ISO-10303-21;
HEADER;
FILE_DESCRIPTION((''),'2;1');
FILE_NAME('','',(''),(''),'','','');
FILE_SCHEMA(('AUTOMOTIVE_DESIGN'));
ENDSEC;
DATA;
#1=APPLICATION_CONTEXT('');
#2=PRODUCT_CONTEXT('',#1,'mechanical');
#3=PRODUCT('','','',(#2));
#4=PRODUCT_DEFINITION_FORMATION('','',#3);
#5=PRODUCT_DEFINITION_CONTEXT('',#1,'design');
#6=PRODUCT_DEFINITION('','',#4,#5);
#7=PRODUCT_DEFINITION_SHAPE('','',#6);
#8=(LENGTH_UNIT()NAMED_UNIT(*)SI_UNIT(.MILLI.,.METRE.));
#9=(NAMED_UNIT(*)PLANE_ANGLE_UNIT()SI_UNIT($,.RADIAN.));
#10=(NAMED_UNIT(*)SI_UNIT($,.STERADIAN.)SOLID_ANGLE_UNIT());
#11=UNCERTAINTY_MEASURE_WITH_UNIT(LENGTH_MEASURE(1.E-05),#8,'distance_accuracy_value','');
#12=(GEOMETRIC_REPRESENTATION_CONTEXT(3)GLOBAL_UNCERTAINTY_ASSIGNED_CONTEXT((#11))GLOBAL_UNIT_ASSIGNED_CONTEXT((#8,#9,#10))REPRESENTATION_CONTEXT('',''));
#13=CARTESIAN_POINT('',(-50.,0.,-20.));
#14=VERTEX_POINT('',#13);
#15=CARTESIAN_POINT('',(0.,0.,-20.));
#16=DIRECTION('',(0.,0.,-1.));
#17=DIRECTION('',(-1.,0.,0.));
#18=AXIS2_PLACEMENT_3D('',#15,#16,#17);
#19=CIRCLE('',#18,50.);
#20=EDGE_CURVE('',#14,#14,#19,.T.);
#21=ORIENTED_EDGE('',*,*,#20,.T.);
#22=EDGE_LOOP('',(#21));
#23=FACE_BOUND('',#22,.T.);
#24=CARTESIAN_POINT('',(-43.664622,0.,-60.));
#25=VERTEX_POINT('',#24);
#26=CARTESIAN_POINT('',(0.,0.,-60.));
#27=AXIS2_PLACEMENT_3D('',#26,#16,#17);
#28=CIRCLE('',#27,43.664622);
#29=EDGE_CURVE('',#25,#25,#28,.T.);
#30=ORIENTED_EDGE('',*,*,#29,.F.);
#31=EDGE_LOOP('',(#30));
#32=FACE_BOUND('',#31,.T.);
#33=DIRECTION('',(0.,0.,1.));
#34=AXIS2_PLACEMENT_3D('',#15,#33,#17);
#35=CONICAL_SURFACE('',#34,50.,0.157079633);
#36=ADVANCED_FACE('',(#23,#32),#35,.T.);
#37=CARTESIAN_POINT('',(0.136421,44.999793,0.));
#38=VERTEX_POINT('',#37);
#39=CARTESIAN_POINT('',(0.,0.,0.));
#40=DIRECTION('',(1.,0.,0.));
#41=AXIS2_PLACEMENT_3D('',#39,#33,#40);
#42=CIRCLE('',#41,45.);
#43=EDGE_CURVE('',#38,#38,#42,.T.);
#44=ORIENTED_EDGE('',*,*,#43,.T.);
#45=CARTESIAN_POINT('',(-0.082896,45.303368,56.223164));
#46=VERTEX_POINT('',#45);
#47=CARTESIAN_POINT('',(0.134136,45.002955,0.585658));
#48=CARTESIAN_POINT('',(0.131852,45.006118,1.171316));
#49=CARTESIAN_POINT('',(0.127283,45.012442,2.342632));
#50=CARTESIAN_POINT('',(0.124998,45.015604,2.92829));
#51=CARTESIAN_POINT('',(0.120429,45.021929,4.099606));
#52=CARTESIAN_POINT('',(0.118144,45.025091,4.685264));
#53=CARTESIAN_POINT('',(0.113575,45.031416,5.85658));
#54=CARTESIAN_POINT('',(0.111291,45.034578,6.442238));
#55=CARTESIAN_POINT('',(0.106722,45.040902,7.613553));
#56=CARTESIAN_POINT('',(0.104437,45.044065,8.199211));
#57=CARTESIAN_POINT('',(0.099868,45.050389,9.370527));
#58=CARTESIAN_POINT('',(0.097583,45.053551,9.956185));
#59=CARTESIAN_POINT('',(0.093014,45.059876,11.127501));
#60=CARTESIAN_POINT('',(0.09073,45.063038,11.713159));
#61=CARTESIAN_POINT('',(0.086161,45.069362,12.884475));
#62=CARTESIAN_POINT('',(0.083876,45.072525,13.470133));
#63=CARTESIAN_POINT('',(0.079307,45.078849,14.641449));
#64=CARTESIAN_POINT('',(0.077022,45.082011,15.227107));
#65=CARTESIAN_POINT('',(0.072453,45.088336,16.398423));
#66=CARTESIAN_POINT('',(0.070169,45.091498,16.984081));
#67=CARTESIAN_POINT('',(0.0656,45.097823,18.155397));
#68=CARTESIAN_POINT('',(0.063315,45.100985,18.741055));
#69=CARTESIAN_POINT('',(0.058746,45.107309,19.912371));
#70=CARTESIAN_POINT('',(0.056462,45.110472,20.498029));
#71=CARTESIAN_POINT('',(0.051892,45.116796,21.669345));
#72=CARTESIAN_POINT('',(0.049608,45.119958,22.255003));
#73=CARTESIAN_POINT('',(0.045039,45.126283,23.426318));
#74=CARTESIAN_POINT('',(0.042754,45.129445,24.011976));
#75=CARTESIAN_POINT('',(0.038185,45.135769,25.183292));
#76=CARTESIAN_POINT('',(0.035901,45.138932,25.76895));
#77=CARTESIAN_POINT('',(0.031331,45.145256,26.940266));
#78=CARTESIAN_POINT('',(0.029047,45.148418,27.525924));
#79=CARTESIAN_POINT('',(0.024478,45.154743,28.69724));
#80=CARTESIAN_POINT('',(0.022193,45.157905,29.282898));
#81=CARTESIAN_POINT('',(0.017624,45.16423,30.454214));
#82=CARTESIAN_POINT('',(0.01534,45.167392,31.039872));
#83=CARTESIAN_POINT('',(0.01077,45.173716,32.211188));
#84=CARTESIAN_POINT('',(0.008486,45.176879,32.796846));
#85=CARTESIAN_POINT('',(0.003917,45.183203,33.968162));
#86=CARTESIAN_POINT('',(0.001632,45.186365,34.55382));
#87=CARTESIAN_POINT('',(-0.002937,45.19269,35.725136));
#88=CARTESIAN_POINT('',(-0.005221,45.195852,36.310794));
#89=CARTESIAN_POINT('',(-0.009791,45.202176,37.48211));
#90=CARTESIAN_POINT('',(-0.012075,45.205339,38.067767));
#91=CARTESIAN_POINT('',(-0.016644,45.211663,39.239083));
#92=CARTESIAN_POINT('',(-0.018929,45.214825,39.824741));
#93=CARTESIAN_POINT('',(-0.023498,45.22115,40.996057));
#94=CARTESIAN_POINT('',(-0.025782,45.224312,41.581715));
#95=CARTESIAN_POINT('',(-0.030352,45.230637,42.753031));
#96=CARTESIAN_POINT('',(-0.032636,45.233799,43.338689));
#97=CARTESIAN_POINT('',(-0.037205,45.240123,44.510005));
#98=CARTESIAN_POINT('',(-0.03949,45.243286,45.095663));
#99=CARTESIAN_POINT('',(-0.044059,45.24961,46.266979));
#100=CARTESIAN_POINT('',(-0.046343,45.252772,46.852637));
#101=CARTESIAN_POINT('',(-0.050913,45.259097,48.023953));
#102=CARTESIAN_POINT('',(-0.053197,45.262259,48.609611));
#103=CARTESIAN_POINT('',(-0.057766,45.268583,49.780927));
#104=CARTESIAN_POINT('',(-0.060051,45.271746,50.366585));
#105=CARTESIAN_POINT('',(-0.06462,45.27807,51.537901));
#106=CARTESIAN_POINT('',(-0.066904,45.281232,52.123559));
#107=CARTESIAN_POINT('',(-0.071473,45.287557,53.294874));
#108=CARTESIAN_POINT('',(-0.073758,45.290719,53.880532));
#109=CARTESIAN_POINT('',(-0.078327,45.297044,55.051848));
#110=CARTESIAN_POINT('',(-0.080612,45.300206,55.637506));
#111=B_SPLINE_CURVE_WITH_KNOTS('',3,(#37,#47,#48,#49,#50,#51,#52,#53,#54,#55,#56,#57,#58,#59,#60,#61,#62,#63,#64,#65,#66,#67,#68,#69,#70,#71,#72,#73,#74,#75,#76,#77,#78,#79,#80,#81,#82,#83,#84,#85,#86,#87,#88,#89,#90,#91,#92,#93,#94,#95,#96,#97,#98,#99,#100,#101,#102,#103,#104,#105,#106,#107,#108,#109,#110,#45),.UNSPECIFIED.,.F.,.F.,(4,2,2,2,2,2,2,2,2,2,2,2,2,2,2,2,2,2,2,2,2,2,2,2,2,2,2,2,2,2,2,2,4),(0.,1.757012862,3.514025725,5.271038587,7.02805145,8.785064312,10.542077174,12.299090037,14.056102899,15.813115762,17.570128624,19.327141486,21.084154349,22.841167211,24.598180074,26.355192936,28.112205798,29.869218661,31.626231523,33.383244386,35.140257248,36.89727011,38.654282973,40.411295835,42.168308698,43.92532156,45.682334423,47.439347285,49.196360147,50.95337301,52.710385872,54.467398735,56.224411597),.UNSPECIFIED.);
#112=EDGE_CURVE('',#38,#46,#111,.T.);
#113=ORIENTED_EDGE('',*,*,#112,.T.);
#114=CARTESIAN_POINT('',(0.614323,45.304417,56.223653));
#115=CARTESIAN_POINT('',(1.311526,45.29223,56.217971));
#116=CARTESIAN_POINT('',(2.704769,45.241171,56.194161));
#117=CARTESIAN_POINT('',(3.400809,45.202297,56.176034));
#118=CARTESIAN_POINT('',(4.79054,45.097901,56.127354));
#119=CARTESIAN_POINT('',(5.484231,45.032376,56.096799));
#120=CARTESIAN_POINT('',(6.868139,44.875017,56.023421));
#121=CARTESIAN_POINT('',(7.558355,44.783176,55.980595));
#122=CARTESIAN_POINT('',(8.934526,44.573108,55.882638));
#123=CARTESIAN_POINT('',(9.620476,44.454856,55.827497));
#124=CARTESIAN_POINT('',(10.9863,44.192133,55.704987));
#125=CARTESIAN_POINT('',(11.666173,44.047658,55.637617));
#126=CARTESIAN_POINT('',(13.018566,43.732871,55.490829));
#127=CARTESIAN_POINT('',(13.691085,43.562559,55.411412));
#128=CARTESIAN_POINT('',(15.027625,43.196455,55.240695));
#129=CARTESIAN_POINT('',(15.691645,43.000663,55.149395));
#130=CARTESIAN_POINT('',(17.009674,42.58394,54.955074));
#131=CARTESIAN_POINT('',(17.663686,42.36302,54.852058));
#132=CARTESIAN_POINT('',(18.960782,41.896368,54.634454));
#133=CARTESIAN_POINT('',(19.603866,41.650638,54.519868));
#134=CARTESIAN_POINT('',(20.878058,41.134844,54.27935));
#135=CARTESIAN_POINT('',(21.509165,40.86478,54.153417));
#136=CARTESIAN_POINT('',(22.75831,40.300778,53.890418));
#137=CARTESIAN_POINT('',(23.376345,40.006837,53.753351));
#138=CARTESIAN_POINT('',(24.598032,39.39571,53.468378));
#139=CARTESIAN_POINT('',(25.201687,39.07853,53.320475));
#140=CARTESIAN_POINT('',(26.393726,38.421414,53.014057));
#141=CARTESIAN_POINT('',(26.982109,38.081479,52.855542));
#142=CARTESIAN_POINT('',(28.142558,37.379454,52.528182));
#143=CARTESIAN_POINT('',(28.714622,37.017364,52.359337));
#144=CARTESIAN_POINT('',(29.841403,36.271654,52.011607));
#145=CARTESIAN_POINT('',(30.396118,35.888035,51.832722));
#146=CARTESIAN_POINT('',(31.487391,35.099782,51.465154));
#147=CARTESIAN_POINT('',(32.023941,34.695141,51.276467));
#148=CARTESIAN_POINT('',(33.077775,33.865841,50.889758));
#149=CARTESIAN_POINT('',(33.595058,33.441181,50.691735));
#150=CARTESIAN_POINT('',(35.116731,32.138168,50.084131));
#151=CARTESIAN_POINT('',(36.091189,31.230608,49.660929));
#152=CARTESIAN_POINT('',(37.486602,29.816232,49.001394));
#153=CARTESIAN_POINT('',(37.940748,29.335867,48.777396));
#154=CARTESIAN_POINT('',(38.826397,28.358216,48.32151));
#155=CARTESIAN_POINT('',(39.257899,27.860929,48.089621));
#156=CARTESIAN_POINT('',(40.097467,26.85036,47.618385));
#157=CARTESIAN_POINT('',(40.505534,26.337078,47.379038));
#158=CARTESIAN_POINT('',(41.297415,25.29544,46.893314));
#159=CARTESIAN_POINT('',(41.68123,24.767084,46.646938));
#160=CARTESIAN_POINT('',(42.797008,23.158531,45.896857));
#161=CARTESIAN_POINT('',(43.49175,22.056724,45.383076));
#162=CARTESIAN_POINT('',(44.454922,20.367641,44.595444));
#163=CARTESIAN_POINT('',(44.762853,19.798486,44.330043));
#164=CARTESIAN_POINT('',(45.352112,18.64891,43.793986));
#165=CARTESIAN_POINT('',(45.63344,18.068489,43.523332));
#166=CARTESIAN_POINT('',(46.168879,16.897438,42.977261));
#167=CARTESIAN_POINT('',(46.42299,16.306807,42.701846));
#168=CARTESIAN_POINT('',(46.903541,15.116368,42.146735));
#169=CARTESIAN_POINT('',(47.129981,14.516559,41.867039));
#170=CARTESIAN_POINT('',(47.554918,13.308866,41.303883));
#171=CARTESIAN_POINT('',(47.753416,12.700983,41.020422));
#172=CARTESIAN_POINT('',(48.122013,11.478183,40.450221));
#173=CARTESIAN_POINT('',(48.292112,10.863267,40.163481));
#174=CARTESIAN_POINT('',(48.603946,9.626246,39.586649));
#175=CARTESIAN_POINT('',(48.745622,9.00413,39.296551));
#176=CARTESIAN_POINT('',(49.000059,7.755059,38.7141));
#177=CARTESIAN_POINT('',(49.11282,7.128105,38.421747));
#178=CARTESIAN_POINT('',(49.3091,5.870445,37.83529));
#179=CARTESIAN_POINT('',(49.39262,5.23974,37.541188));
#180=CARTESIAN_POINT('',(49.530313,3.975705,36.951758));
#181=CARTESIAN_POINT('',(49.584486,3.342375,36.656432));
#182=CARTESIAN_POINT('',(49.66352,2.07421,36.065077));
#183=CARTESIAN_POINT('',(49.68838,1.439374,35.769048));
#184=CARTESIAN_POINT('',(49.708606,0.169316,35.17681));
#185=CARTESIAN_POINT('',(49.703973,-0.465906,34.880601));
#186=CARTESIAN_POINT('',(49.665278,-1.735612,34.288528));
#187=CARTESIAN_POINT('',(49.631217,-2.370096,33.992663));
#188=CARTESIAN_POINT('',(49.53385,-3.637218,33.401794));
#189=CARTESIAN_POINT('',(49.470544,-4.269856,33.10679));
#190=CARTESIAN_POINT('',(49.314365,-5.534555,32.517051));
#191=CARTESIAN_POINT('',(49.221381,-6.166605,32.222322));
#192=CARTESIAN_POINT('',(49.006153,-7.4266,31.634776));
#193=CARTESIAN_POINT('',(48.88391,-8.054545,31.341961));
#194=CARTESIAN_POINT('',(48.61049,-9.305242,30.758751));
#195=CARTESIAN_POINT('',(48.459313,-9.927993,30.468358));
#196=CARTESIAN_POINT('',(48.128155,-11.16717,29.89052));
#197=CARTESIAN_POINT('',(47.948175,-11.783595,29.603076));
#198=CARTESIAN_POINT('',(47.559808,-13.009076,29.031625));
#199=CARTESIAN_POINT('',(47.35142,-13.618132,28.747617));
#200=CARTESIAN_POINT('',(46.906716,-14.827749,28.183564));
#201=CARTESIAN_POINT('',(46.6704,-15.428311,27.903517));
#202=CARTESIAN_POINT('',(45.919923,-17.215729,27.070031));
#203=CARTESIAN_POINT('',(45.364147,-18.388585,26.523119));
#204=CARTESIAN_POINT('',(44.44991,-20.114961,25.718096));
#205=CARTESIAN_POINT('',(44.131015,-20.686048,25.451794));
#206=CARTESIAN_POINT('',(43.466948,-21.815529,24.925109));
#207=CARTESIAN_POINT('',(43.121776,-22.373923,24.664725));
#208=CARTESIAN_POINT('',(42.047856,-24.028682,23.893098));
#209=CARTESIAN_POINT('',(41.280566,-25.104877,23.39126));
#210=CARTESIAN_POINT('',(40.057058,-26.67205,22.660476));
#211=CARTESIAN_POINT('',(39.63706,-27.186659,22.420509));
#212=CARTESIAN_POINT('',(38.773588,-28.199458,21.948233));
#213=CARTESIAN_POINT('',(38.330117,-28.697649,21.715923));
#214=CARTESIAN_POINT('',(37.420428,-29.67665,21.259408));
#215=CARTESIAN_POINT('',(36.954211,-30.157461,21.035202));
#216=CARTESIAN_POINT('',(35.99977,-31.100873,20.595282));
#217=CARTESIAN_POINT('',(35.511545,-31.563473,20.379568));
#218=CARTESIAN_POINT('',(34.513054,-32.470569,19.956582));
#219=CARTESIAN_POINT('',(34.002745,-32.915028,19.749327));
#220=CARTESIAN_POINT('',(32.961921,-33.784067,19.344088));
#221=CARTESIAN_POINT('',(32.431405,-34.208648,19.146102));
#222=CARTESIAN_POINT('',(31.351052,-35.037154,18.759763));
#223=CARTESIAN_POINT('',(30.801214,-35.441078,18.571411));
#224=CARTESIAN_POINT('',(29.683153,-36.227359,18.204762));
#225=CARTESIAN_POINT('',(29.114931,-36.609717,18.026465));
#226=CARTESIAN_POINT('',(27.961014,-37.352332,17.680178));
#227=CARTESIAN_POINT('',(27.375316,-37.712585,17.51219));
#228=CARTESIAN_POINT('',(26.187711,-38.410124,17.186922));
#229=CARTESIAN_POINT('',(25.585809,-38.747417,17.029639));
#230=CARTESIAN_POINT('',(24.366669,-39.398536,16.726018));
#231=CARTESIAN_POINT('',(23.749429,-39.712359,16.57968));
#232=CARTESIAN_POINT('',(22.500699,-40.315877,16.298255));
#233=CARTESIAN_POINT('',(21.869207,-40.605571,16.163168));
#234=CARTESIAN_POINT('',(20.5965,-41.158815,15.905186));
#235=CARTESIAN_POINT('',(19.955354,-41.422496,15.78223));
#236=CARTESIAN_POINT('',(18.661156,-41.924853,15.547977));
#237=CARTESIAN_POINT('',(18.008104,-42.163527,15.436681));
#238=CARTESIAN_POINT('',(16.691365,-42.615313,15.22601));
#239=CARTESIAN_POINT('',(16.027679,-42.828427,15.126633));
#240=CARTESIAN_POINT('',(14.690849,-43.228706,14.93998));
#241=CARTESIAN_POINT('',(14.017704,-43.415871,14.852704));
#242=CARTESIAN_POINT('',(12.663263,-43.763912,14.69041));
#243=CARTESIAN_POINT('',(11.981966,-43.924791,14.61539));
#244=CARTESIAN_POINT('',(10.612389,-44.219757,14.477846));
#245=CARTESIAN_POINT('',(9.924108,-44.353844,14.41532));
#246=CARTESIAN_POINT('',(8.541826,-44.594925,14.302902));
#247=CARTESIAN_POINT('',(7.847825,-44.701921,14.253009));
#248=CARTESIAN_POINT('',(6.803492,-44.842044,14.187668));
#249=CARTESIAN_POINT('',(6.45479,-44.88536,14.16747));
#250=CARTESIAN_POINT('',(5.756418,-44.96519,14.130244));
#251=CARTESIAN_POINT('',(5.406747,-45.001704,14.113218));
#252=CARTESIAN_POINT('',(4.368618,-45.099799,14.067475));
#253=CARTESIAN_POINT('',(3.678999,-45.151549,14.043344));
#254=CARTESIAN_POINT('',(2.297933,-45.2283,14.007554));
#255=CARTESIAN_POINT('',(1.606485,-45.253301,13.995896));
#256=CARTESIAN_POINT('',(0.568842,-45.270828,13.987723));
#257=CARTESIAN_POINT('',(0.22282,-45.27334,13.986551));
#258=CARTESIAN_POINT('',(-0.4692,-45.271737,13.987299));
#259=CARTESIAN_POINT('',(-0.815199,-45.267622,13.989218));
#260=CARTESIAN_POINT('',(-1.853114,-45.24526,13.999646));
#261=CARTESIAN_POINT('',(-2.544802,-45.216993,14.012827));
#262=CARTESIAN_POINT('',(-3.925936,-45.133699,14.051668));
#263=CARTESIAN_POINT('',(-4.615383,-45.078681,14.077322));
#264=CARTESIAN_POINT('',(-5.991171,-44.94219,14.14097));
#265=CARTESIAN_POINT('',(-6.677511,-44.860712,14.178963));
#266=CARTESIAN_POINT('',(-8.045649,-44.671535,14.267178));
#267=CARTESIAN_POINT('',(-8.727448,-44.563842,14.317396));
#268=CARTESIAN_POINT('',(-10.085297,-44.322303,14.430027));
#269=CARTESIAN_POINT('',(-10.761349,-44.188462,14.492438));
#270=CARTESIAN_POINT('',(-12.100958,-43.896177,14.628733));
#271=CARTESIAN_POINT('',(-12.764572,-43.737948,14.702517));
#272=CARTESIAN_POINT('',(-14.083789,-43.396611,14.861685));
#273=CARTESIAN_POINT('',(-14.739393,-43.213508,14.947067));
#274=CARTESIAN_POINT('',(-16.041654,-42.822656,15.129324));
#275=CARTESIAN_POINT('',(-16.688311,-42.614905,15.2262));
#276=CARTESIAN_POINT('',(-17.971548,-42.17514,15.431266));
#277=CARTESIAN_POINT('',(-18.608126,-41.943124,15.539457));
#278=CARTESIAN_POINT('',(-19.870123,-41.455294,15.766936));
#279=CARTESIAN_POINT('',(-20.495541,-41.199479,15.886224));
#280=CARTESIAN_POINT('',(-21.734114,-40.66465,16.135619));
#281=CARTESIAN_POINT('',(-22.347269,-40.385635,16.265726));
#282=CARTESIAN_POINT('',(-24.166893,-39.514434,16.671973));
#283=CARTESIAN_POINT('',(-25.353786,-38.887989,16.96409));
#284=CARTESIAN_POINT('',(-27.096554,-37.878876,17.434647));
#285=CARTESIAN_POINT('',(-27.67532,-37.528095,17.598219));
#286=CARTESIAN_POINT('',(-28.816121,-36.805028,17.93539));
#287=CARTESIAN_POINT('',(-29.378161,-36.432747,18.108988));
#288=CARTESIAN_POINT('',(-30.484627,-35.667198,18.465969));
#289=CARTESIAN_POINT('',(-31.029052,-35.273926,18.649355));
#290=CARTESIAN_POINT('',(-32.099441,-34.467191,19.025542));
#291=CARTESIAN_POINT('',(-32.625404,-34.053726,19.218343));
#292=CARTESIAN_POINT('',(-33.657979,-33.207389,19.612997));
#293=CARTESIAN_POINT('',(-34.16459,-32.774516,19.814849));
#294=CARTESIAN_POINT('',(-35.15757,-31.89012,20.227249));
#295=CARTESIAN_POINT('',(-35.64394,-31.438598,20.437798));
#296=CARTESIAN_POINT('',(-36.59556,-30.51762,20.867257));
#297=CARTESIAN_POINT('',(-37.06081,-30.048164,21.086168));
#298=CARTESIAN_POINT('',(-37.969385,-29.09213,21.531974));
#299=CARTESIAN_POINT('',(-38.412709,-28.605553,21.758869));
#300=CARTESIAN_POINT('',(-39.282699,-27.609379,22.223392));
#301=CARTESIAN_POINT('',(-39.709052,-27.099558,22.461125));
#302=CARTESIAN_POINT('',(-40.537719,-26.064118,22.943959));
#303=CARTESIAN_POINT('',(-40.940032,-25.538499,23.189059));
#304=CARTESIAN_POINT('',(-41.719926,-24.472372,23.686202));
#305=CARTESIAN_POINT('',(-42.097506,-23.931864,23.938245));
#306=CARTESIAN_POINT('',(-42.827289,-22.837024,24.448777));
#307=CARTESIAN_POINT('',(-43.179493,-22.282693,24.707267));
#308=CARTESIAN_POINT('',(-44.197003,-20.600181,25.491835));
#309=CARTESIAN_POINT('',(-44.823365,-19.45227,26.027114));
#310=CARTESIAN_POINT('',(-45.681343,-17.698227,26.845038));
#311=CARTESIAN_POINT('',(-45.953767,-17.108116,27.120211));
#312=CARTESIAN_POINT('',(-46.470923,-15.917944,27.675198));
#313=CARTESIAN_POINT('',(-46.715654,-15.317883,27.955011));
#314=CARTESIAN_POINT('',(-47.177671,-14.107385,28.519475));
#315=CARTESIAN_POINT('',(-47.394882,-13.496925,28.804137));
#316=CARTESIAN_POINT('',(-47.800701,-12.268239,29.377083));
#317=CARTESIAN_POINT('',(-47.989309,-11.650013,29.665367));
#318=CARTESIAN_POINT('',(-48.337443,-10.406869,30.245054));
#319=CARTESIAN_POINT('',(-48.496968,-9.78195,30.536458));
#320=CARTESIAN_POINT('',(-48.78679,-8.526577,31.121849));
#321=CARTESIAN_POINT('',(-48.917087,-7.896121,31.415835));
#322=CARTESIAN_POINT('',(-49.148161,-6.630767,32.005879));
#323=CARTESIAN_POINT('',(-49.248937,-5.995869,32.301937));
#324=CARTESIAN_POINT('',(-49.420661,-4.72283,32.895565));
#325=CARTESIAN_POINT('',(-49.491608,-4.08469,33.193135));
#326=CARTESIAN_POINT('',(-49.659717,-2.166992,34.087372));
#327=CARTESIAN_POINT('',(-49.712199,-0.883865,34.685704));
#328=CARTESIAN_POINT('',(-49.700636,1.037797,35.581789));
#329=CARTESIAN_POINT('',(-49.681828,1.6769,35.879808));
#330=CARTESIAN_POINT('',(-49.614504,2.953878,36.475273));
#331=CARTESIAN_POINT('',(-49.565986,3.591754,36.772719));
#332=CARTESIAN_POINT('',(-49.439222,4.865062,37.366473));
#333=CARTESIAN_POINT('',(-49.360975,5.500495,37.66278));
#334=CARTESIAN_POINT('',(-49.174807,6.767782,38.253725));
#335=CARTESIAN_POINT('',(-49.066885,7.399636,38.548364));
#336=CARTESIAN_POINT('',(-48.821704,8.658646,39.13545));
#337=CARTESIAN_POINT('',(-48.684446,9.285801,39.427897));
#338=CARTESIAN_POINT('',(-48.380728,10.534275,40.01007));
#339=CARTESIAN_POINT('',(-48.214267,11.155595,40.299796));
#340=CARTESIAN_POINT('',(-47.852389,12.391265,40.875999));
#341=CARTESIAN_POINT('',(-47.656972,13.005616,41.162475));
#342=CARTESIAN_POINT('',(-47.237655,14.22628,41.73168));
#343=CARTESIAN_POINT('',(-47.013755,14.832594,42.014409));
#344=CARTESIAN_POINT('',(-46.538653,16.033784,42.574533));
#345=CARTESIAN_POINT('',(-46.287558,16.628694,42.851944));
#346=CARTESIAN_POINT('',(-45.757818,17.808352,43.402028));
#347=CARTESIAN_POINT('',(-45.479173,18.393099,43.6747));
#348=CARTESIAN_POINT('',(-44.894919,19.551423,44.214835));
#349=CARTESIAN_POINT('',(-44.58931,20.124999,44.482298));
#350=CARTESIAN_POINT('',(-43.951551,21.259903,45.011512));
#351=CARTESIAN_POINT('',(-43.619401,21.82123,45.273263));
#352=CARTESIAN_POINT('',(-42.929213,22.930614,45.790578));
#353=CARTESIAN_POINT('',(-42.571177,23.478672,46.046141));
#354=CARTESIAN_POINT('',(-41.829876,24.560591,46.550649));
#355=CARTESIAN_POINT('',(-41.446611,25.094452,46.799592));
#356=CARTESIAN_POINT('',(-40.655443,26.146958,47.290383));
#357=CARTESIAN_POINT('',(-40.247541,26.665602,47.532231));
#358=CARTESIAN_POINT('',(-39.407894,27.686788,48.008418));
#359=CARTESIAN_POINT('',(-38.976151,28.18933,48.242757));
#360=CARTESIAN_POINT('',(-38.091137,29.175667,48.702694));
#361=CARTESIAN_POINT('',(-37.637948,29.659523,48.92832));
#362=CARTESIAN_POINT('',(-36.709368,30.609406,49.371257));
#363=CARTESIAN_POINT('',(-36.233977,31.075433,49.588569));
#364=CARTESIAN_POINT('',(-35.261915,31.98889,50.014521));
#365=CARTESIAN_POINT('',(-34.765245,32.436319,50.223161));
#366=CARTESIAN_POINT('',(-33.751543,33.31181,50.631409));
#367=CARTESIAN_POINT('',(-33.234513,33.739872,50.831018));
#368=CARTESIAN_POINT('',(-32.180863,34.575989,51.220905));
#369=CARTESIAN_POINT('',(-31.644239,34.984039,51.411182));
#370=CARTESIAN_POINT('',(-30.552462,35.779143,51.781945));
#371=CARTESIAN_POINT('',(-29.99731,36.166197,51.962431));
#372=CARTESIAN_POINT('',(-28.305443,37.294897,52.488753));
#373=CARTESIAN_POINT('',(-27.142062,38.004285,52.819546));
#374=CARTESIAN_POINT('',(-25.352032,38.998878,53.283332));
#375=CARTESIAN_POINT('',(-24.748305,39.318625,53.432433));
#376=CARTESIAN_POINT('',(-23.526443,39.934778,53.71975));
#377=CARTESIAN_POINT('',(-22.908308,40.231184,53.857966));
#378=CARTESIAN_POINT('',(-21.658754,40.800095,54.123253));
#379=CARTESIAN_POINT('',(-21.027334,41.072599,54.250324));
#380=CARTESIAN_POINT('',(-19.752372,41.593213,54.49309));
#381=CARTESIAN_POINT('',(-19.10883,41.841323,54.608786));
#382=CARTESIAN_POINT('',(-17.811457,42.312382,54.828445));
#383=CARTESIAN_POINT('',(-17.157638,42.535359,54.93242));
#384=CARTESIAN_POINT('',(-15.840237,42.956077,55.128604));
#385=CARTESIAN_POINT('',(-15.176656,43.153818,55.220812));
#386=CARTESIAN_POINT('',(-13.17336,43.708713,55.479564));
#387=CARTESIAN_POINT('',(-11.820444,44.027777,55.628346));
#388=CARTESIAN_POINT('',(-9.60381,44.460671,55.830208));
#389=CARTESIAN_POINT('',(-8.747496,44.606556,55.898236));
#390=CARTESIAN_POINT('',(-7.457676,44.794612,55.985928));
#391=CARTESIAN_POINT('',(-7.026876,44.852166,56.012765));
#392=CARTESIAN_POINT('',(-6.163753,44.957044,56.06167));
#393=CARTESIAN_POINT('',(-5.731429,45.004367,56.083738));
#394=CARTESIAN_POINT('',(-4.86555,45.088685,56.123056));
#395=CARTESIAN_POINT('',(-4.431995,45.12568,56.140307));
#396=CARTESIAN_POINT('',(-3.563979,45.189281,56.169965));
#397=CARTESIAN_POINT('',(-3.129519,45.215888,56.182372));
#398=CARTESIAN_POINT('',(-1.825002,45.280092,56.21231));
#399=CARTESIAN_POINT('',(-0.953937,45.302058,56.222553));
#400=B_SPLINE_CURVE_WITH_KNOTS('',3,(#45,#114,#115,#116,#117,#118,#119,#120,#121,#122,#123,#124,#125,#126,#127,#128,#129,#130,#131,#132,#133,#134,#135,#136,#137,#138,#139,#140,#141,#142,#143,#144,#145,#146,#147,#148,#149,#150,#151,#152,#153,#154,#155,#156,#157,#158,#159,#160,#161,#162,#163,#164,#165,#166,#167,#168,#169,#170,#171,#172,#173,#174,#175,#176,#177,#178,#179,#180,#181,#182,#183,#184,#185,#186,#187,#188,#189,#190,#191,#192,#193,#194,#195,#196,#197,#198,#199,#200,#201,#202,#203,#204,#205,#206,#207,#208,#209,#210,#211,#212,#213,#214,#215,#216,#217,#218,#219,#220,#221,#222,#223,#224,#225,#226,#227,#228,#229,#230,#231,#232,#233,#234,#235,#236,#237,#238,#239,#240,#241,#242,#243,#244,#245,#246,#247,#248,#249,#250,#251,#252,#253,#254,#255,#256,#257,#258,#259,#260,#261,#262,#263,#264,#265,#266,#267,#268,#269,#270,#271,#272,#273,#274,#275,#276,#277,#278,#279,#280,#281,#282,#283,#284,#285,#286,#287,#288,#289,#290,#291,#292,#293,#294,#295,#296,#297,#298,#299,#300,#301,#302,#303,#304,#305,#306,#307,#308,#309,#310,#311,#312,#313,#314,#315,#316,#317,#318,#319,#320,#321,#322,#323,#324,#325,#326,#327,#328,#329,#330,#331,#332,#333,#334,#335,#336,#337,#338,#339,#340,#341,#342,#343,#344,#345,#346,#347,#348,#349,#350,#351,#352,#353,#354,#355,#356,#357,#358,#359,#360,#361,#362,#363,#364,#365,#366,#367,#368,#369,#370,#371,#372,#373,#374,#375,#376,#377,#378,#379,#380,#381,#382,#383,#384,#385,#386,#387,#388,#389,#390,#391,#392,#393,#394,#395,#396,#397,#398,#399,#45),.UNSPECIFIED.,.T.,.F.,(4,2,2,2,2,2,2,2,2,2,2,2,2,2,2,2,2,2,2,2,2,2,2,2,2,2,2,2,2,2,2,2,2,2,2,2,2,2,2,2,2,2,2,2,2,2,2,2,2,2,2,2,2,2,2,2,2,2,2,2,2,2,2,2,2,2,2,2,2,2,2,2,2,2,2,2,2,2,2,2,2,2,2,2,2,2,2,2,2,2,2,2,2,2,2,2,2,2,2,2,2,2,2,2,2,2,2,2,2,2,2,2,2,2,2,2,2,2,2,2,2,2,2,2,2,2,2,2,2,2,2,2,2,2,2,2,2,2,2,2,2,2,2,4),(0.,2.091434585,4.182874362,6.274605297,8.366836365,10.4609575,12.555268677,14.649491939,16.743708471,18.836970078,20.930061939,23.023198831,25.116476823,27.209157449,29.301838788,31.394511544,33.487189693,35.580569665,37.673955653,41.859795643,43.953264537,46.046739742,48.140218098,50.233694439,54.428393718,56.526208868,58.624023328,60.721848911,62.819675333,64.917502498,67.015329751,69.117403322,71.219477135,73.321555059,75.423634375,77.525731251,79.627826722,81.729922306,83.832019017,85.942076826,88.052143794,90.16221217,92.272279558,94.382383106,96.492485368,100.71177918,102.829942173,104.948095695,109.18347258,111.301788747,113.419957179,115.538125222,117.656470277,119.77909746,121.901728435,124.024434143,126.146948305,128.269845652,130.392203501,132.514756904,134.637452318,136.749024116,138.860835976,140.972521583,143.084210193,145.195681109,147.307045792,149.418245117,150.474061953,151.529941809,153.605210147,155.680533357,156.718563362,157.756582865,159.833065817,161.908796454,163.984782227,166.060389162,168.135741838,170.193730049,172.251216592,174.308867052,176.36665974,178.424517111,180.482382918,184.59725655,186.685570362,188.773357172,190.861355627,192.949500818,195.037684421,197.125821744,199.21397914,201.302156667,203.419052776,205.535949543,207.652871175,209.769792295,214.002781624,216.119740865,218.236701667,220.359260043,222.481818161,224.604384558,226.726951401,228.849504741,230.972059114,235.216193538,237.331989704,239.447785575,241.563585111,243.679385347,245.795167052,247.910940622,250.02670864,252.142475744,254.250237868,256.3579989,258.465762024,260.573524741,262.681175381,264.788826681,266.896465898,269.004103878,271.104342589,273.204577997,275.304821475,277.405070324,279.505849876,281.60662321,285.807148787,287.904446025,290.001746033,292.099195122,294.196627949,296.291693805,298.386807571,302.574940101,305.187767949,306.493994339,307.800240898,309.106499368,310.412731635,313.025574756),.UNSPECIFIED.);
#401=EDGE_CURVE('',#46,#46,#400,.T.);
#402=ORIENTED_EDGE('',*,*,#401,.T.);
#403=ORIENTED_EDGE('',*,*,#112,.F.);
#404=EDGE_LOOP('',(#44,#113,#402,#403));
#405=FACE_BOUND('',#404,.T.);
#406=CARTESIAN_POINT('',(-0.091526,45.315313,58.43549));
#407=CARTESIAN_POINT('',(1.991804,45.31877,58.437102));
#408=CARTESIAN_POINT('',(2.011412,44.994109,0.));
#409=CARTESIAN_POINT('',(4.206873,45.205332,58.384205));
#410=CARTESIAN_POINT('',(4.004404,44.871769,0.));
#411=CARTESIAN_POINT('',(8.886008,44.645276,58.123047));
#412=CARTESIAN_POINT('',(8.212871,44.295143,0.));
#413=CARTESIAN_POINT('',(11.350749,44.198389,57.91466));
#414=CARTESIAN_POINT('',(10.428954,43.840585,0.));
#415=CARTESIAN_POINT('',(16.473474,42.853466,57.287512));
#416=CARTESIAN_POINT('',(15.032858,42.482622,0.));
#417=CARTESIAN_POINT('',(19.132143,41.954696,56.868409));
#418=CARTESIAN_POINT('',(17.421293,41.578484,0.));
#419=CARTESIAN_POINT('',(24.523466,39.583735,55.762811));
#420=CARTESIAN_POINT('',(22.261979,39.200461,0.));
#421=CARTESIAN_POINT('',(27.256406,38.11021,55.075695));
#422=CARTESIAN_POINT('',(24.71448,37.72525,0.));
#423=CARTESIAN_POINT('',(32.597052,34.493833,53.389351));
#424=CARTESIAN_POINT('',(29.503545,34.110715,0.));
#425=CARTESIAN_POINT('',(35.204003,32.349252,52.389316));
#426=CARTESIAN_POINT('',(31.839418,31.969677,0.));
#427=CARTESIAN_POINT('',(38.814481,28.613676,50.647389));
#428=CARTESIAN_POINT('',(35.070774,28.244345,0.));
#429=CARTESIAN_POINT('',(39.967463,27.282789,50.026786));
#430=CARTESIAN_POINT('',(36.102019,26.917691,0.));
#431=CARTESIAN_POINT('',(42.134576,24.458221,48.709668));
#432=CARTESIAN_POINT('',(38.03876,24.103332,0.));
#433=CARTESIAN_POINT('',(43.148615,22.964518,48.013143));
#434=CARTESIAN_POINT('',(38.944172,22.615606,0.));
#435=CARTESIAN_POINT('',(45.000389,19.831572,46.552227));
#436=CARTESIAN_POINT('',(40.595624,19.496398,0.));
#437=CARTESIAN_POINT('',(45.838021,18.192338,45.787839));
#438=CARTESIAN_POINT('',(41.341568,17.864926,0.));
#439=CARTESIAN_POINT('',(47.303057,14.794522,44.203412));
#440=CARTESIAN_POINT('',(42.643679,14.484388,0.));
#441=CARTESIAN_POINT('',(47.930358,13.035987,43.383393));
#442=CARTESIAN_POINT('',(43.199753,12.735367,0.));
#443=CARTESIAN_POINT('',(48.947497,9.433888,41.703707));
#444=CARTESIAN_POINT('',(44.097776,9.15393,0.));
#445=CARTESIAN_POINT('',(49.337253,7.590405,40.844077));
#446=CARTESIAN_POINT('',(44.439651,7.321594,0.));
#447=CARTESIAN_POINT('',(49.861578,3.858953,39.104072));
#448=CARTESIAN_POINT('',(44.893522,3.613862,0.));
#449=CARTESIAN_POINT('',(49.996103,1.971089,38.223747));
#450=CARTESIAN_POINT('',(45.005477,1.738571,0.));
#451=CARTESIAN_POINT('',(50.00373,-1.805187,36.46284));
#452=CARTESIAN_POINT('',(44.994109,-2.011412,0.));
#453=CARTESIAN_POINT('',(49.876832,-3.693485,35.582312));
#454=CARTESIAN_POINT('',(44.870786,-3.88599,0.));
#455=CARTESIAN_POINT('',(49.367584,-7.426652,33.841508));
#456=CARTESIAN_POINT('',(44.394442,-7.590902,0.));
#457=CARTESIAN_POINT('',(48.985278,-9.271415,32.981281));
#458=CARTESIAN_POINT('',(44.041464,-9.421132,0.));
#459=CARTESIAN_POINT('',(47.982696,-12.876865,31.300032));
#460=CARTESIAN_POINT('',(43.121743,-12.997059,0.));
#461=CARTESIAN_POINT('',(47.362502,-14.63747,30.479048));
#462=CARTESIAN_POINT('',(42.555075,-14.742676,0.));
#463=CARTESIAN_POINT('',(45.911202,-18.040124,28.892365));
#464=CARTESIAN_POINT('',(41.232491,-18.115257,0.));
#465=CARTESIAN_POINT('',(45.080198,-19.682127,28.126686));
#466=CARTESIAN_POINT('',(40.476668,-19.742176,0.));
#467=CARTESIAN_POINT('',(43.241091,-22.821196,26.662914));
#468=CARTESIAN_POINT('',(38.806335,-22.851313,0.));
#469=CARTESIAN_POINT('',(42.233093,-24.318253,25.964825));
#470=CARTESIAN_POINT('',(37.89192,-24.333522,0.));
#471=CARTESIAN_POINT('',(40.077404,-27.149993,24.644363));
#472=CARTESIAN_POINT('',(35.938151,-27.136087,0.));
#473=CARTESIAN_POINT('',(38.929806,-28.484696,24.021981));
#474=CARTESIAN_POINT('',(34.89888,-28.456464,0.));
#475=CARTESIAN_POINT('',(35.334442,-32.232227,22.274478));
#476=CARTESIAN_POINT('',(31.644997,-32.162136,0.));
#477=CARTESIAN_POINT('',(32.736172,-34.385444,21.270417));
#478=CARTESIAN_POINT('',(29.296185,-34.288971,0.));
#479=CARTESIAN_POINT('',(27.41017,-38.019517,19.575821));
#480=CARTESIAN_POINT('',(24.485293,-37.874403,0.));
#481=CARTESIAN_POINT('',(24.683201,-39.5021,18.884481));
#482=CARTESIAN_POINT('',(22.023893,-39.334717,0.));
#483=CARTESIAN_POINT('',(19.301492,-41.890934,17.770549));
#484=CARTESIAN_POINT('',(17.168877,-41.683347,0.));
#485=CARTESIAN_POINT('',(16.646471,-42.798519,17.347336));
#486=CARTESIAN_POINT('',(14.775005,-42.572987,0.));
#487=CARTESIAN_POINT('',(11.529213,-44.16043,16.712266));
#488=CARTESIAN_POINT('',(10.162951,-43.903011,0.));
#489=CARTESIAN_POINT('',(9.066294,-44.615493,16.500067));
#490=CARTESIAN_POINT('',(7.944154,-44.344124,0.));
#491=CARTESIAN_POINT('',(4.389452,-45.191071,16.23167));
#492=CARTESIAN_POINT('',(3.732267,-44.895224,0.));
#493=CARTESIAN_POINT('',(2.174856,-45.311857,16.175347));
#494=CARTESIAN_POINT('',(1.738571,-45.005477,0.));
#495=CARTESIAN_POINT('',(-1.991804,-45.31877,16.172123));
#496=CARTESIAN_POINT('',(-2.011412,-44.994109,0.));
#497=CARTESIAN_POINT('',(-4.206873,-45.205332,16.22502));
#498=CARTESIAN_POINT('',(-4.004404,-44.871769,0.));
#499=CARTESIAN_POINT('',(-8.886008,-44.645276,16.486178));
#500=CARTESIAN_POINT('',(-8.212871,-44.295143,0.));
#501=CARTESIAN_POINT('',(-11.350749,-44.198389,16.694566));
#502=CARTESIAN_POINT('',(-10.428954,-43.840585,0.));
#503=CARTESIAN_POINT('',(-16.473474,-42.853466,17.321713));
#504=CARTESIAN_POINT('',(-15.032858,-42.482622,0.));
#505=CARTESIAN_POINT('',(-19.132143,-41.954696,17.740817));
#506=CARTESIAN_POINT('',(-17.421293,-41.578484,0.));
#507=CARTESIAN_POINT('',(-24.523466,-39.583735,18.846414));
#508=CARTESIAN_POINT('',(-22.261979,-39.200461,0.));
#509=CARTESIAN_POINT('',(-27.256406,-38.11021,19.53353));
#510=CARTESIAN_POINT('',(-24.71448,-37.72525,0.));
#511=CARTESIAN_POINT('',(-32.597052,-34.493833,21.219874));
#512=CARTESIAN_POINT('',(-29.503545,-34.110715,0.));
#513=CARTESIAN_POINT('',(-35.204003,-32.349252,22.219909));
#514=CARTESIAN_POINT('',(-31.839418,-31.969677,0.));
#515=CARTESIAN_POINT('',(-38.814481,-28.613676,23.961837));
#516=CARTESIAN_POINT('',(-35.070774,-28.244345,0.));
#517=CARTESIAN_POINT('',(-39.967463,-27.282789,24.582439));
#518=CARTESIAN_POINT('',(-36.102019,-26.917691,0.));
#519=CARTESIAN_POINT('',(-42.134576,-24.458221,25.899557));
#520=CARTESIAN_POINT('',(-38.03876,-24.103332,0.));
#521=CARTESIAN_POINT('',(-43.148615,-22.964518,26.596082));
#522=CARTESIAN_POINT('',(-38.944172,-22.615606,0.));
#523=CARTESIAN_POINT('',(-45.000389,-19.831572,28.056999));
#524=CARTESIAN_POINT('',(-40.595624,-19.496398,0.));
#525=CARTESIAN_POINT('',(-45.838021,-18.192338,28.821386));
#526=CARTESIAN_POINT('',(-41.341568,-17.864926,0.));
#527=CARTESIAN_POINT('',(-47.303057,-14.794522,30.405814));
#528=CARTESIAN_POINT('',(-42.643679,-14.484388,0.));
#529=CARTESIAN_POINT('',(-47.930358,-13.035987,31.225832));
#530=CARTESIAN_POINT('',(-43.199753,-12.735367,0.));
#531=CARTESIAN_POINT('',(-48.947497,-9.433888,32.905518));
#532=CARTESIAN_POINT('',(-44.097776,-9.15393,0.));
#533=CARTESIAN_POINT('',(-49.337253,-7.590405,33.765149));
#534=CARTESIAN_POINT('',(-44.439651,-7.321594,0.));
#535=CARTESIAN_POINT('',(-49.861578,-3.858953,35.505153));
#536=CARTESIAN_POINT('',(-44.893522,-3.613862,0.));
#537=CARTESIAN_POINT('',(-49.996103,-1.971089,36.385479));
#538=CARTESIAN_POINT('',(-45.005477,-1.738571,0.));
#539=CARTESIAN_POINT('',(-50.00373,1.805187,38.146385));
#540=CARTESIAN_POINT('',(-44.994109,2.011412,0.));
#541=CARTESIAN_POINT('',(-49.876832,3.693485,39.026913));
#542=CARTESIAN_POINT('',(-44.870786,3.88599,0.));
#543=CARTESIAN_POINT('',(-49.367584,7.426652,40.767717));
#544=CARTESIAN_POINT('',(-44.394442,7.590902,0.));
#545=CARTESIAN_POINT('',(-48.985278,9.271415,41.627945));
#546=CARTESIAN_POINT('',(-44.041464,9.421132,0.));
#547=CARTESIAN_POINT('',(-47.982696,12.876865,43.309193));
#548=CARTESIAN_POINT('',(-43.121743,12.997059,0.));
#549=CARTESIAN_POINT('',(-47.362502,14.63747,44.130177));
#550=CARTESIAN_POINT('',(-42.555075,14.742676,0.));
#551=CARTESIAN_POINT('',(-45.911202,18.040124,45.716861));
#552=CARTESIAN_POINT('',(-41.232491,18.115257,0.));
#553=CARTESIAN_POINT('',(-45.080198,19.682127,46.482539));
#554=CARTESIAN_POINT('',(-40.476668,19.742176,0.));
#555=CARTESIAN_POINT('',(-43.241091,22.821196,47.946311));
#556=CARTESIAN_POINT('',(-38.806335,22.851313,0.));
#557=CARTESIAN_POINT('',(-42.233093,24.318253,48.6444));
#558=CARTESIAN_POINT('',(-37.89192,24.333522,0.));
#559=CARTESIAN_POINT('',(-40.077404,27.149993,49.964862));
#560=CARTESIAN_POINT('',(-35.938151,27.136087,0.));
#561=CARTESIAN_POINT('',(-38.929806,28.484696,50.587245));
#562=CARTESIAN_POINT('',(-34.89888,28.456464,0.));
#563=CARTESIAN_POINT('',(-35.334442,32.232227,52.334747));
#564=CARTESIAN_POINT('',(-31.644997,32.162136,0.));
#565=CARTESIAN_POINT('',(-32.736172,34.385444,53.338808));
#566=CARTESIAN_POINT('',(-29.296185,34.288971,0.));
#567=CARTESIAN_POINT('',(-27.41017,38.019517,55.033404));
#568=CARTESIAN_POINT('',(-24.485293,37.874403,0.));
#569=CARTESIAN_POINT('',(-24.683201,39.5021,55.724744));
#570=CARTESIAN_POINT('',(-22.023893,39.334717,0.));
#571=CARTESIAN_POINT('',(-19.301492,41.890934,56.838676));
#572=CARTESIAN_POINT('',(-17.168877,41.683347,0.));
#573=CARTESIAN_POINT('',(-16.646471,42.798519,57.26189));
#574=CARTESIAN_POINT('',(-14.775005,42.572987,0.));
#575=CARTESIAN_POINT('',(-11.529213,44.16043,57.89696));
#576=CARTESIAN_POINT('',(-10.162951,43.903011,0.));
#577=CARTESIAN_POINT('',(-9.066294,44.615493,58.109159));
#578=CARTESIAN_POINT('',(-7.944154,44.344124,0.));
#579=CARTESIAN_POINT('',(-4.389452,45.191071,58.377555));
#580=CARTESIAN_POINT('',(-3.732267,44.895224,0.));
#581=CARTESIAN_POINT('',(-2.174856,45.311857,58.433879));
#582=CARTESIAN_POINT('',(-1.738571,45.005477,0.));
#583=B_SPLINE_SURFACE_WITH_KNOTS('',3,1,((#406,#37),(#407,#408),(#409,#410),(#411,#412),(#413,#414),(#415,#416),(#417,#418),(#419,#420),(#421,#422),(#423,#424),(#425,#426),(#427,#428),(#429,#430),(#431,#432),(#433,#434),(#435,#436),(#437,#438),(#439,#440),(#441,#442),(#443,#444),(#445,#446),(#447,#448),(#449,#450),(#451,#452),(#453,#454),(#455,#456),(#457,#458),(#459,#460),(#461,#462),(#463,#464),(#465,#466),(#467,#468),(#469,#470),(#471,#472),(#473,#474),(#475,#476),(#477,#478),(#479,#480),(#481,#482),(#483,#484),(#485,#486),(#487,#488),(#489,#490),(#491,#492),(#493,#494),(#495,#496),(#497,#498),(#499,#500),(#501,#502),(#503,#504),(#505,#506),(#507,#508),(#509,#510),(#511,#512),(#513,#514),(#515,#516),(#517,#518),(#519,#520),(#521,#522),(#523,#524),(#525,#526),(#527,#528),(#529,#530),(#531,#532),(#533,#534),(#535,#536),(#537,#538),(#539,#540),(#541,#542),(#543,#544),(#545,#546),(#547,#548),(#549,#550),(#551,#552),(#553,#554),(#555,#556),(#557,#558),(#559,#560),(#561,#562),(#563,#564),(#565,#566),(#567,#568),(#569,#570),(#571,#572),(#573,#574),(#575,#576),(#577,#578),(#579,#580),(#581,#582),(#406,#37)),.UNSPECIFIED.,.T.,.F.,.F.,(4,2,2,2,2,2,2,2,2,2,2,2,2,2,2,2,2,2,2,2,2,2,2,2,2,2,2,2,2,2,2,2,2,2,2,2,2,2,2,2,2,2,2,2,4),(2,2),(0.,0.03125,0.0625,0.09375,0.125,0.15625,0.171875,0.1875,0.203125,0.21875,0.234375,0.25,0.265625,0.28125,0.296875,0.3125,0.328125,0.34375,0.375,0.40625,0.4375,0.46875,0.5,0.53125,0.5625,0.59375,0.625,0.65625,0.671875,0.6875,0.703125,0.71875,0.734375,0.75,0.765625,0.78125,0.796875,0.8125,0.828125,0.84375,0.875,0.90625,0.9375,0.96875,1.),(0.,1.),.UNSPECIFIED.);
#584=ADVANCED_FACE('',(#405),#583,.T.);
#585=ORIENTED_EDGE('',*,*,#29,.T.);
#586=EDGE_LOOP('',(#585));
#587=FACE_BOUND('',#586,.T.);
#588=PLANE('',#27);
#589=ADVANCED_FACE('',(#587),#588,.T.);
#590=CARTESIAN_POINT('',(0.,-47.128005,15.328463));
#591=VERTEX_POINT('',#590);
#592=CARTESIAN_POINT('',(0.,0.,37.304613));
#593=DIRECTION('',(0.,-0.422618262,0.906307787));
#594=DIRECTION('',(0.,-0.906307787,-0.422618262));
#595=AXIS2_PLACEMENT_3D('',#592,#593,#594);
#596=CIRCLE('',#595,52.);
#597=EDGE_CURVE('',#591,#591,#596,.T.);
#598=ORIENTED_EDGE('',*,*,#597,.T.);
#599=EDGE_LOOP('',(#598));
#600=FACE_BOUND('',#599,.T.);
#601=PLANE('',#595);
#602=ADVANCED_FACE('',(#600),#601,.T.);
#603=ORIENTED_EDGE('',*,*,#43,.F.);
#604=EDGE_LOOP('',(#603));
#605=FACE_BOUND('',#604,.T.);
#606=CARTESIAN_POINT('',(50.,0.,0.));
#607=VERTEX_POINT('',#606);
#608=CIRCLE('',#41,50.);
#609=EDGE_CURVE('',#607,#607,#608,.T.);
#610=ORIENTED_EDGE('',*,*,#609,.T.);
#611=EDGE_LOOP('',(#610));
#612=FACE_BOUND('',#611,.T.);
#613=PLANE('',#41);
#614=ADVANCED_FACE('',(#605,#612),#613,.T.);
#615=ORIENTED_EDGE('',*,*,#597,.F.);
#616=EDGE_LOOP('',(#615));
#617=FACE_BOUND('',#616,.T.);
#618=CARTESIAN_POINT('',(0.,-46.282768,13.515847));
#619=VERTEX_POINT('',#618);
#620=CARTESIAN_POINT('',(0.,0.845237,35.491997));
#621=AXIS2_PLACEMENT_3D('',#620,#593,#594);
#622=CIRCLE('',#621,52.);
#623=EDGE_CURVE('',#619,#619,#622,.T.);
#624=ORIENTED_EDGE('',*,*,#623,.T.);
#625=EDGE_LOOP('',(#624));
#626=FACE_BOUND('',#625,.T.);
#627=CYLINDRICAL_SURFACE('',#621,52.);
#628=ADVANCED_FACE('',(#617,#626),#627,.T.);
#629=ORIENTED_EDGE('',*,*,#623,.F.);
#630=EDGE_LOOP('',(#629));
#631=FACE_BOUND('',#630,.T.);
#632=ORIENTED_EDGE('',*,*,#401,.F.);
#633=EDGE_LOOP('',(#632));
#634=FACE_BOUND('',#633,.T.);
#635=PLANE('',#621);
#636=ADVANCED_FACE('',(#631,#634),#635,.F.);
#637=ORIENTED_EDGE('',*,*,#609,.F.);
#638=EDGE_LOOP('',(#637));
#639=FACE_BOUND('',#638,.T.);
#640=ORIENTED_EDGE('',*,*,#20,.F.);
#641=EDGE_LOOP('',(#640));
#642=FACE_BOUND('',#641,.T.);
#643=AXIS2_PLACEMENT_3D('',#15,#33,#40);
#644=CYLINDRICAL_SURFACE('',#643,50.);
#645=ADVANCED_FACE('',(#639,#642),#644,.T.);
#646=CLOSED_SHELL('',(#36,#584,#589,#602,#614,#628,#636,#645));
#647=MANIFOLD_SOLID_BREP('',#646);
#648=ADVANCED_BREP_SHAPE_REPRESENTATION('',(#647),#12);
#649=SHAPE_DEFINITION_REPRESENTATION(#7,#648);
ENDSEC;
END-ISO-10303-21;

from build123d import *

# Parameters (mm, degrees)
SKETCH1_R           = 50
BOSS_EXTRUDE1_DEPTH = 20
SKETCH4_R           = 50
BOSS_EXTRUDE2_DEPTH = 40
BOSS_EXTRUDE2_TAPER = 9
SKETCH3_7_R         = 52
BOSS_EXTRUDE4_DEPTH = 2


with BuildPart() as part:
    # Sketch1 → Boss-Extrude1 (new body)
    with BuildSketch(Plane.XY):
        Circle(SKETCH1_R)
    extrude(amount=-BOSS_EXTRUDE1_DEPTH)

    # Sketch4 → Boss-Extrude2 (add)
    with BuildSketch(Plane(origin=(0, 0, -20), x_dir=(-1, 0, 0), z_dir=(0, 0, -1))):
        with Locations(Location((0, 0, 0), (0, 0, 180))):
            Circle(SKETCH4_R)
    extrude(amount=BOSS_EXTRUDE2_DEPTH, taper=BOSS_EXTRUDE2_TAPER)

    # Loft2: read off the stored shape, not the designer's step
    # Loft2: loft between two sections, ruled curve by curve
    loft2_from = [
        Edge.make_bspline([(-0.09152616, 45.31531343, 58.435490337), (1.991803683, 45.318769716, 58.437102029), (4.206873224, 45.205331996, 58.384205151), (8.88600843, 44.645276274, 58.123046879), (11.350748929, 44.198388733, 57.914659797), (16.473473932, 42.853465541, 57.287511813), (19.132143408, 41.954695988, 56.868408687), (24.523466482, 39.583734538, 55.762811206), (27.256405564, 38.110209758, 55.075695316), (32.597052055, 34.493832776, 53.389351035), (35.204002583, 32.349251741, 52.389316475), (38.814480974, 28.61367569, 50.647388755), (39.967462866, 27.282788702, 50.02678596), (42.134576019, 24.458220553, 48.709668201), (43.14861453, 22.964518438, 48.013143466), (45.000389489, 19.831572212, 46.552226648), (45.838021163, 18.192337872, 45.787839122), (47.303056553, 14.794522163, 44.203411636), (47.930358248, 13.035986558, 43.383393016), (48.947497256, 9.433887898, 41.703706825), (49.337252793, 7.590405028, 40.844076645), (49.861578346, 3.858952965, 39.104071973), (49.99610264, 1.971088931, 38.223746516), (50.00372982, -1.805187188, 36.462840042), (49.876832475, -3.693484925, 35.582312346), (49.367583678, -7.426651708, 33.841508086), (48.985277522, -9.271415445, 32.981280629), (47.982696048, -12.876864862, 31.300031954), (47.36250218, -14.637470087, 30.479048255), (45.911202122, -18.040124056, 28.892364651), (45.080197767, -19.682126696, 28.126686245), (43.241090789, -22.82119617, 26.66291411), (42.2330929, -24.318252884, 25.9648251), (40.077404144, -27.149992649, 24.644363161), (38.929806111, -28.484696346, 24.021980606), (35.334441818, -32.232227035, 22.274478346), (32.736171819, -34.385443637, 21.270416955), (27.410169514, -38.019516805, 19.575820807), (24.683201066, -39.502099682, 18.884481058), (19.301491648, -41.89093381, 17.770549409), (16.646470579, -42.798518884, 17.347335539), (11.529212738, -44.160430414, 16.712265763), (9.066293964, -44.615493042, 16.500066575), (4.389452468, -45.191070517, 16.23167039), (2.174856003, -45.311857144, 16.175346661), (-1.991803683, -45.318769716, 16.172123276), (-4.206873224, -45.205331996, 16.225020153), (-8.88600843, -44.645276274, 16.486178425), (-11.350748929, -44.198388733, 16.694565508), (-16.473473932, -42.853465541, 17.321713492), (-19.132143408, -41.954695988, 17.740816618), (-24.523466482, -39.583734538, 18.846414099), (-27.256405564, -38.110209758, 19.533529988), (-32.597052055, -34.493832776, 21.21987427), (-35.204002583, -32.349251741, 22.21990883), (-38.814480974, -28.61367569, 23.96183655), (-39.967462866, -27.282788702, 24.582439345), (-42.134576019, -24.458220553, 25.899557104), (-43.14861453, -22.964518438, 26.596081839), (-45.000389489, -19.831572212, 28.056998657), (-45.838021163, -18.192337872, 28.821386183), (-47.303056553, -14.794522163, 30.405813669), (-47.930358248, -13.035986558, 31.225832289), (-48.947497256, -9.433887898, 32.905518479), (-49.337252793, -7.590405028, 33.76514866), (-49.861578346, -3.858952965, 35.505153332), (-49.99610264, -1.971088931, 36.385478789), (-50.00372982, 1.805187188, 38.146385262), (-49.876832475, 3.693484925, 39.026912958), (-49.367583678, 7.426651708, 40.767717218), (-48.985277522, 9.271415445, 41.627944676), (-47.982696048, 12.876864862, 43.30919335), (-47.36250218, 14.637470087, 44.13017705), (-45.911202122, 18.040124056, 45.716860654), (-45.080197767, 19.682126696, 46.48253906), (-43.241090789, 22.82119617, 47.946311195), (-42.2330929, 24.318252884, 48.644400205), (-40.077404144, 27.149992649, 49.964862143), (-38.929806111, 28.484696346, 50.587244699), (-35.334441818, 32.232227035, 52.334746958), (-32.736171819, 34.385443637, 53.338808349), (-27.410169514, 38.019516805, 55.033404498), (-24.683201066, 39.502099682, 55.724744247), (-19.301491648, 41.89093381, 56.838675895), (-16.646470579, 42.798518884, 57.261889765), (-11.529212738, 44.160430414, 57.896959542), (-9.066293964, 44.615493042, 58.10915873), (-4.389452468, 45.191070517, 58.377554915), (-2.174856003, 45.311857144, 58.433878644), (-0.09152616, 45.31531343, 58.435490337)], [0, 0, 0, 0, 0.03125, 0.03125, 0.0625, 0.0625, 0.09375, 0.09375, 0.125, 0.125, 0.15625, 0.15625, 0.171875, 0.171875, 0.1875, 0.1875, 0.203125, 0.203125, 0.21875, 0.21875, 0.234375, 0.234375, 0.25, 0.25, 0.265625, 0.265625, 0.28125, 0.28125, 0.296875, 0.296875, 0.3125, 0.3125, 0.328125, 0.328125, 0.34375, 0.34375, 0.375, 0.375, 0.40625, 0.40625, 0.4375, 0.4375, 0.46875, 0.46875, 0.5, 0.5, 0.53125, 0.53125, 0.5625, 0.5625, 0.59375, 0.59375, 0.625, 0.625, 0.65625, 0.65625, 0.671875, 0.671875, 0.6875, 0.6875, 0.703125, 0.703125, 0.71875, 0.71875, 0.734375, 0.734375, 0.75, 0.75, 0.765625, 0.765625, 0.78125, 0.78125, 0.796875, 0.796875, 0.8125, 0.8125, 0.828125, 0.828125, 0.84375, 0.84375, 0.875, 0.875, 0.90625, 0.90625, 0.9375, 0.9375, 0.96875, 0.96875, 1, 1, 1, 1], 3),
    ]
    loft2_to = [
        Edge.make_bspline([(0.136420865, 44.999793214, 0), (2.011412249, 44.994109012, 0), (4.004403567, 44.871769265, 0), (8.21287139, 44.295142718, 0), (10.428953936, 43.840585304, 0), (15.032858325, 42.482621984, 0), (17.421293091, 41.578484294, 0), (22.261978921, 39.200460503, 0), (24.714480484, 37.725249561, 0), (29.503544757, 34.110714545, 0), (31.839417938, 31.969677001, 0), (35.070773805, 28.244344926, 0), (36.102019394, 26.917691058, 0), (38.03876047, 24.10333168, 0), (38.944172383, 22.615605767, 0), (40.595623515, 19.496398085, 0), (41.341568486, 17.864926477, 0), (42.643679265, 14.484388202, 0), (43.199753477, 12.735367429, 0), (44.097775949, 9.153930324, 0), (44.439650999, 7.321593977, 0), (44.893522054, 3.613861762, 0), (45.005477417, 1.738570519, 0), (44.994109012, -2.011412249, 0), (44.870785588, -3.885990223, 0), (44.394442444, -7.590902411, 0), (44.041463999, -9.421132248, 0), (43.121743345, -12.997058703, 0), (42.555074828, -14.742675783, 0), (41.232491368, -18.115257064, 0), (40.476668297, -19.742175929, 0), (38.806335385, -22.851313328, 0), (37.891919851, -24.333522272, 0), (35.93815057, -27.136087223, 0), (34.898880272, -28.456464139, 0), (31.644996659, -32.162135635, 0), (29.296185043, -34.288971141, 0), (24.485293431, -37.87440304, 0), (22.023892564, -39.33471705, 0), (17.168877462, -41.683347464, 0), (14.775004701, -42.572987164, 0), (10.162951439, -43.903011492, 0), (7.944153589, -44.344124173, 0), (3.732266966, -44.895223668, 0), (1.738570519, -45.005477417, 0), (-2.011412249, -44.994109012, 0), (-4.004403567, -44.871769265, 0), (-8.21287139, -44.295142718, 0), (-10.428953936, -43.840585304, 0), (-15.032858325, -42.482621984, 0), (-17.421293091, -41.578484294, 0), (-22.261978921, -39.200460503, 0), (-24.714480484, -37.725249561, 0), (-29.503544757, -34.110714545, 0), (-31.839417938, -31.969677001, 0), (-35.070773805, -28.244344926, 0), (-36.102019394, -26.917691058, 0), (-38.03876047, -24.10333168, 0), (-38.944172383, -22.615605767, 0), (-40.595623515, -19.496398085, 0), (-41.341568486, -17.864926477, 0), (-42.643679265, -14.484388202, 0), (-43.199753477, -12.735367429, 0), (-44.097775949, -9.153930324, 0), (-44.439650999, -7.321593977, 0), (-44.893522054, -3.613861762, 0), (-45.005477417, -1.738570519, 0), (-44.994109012, 2.011412249, 0), (-44.870785588, 3.885990223, 0), (-44.394442444, 7.590902411, 0), (-44.041463999, 9.421132248, 0), (-43.121743345, 12.997058703, 0), (-42.555074828, 14.742675783, 0), (-41.232491368, 18.115257064, 0), (-40.476668297, 19.742175929, 0), (-38.806335385, 22.851313328, 0), (-37.891919851, 24.333522272, 0), (-35.93815057, 27.136087223, 0), (-34.898880272, 28.456464139, 0), (-31.644996659, 32.162135635, 0), (-29.296185043, 34.288971141, 0), (-24.485293431, 37.87440304, 0), (-22.023892564, 39.33471705, 0), (-17.168877462, 41.683347464, 0), (-14.775004701, 42.572987164, 0), (-10.162951439, 43.903011492, 0), (-7.944153589, 44.344124173, 0), (-3.732266966, 44.895223668, 0), (-1.738570519, 45.005477417, 0), (0.136420865, 44.999793214, 0)], [0, 0, 0, 0, 0.03125, 0.03125, 0.0625, 0.0625, 0.09375, 0.09375, 0.125, 0.125, 0.15625, 0.15625, 0.171875, 0.171875, 0.1875, 0.1875, 0.203125, 0.203125, 0.21875, 0.21875, 0.234375, 0.234375, 0.25, 0.25, 0.265625, 0.265625, 0.28125, 0.28125, 0.296875, 0.296875, 0.3125, 0.3125, 0.328125, 0.328125, 0.34375, 0.34375, 0.375, 0.375, 0.40625, 0.40625, 0.4375, 0.4375, 0.46875, 0.46875, 0.5, 0.5, 0.53125, 0.53125, 0.5625, 0.5625, 0.59375, 0.59375, 0.625, 0.625, 0.65625, 0.65625, 0.671875, 0.671875, 0.6875, 0.6875, 0.703125, 0.703125, 0.71875, 0.71875, 0.734375, 0.734375, 0.75, 0.75, 0.765625, 0.765625, 0.78125, 0.78125, 0.796875, 0.796875, 0.8125, 0.8125, 0.828125, 0.828125, 0.84375, 0.84375, 0.875, 0.875, 0.90625, 0.90625, 0.9375, 0.9375, 0.96875, 0.96875, 1, 1, 1, 1], 3),
    ]
    loft2 = Solid(Shell([*[Face.make_surface_from_curves(loft2_from[k], loft2_to[k]) for k in range(1)], Face(Wire(loft2_from)), Face(Wire(loft2_to))]))
    add(loft2)

    # Sketch3<7> → Boss-Extrude4 (add)
    with BuildSketch(Plane(origin=(0, -14.288495613, 30.641777725), x_dir=(1, 0, 0), z_dir=(0, -0.4226182617407003, 0.9063077870366496))):
        with Locations(Location((0, 15.765610554, 0), (0, 0, 270))):
            Circle(SKETCH3_7_R)
    extrude(amount=-BOSS_EXTRUDE4_DEPTH)


solid = part.part
